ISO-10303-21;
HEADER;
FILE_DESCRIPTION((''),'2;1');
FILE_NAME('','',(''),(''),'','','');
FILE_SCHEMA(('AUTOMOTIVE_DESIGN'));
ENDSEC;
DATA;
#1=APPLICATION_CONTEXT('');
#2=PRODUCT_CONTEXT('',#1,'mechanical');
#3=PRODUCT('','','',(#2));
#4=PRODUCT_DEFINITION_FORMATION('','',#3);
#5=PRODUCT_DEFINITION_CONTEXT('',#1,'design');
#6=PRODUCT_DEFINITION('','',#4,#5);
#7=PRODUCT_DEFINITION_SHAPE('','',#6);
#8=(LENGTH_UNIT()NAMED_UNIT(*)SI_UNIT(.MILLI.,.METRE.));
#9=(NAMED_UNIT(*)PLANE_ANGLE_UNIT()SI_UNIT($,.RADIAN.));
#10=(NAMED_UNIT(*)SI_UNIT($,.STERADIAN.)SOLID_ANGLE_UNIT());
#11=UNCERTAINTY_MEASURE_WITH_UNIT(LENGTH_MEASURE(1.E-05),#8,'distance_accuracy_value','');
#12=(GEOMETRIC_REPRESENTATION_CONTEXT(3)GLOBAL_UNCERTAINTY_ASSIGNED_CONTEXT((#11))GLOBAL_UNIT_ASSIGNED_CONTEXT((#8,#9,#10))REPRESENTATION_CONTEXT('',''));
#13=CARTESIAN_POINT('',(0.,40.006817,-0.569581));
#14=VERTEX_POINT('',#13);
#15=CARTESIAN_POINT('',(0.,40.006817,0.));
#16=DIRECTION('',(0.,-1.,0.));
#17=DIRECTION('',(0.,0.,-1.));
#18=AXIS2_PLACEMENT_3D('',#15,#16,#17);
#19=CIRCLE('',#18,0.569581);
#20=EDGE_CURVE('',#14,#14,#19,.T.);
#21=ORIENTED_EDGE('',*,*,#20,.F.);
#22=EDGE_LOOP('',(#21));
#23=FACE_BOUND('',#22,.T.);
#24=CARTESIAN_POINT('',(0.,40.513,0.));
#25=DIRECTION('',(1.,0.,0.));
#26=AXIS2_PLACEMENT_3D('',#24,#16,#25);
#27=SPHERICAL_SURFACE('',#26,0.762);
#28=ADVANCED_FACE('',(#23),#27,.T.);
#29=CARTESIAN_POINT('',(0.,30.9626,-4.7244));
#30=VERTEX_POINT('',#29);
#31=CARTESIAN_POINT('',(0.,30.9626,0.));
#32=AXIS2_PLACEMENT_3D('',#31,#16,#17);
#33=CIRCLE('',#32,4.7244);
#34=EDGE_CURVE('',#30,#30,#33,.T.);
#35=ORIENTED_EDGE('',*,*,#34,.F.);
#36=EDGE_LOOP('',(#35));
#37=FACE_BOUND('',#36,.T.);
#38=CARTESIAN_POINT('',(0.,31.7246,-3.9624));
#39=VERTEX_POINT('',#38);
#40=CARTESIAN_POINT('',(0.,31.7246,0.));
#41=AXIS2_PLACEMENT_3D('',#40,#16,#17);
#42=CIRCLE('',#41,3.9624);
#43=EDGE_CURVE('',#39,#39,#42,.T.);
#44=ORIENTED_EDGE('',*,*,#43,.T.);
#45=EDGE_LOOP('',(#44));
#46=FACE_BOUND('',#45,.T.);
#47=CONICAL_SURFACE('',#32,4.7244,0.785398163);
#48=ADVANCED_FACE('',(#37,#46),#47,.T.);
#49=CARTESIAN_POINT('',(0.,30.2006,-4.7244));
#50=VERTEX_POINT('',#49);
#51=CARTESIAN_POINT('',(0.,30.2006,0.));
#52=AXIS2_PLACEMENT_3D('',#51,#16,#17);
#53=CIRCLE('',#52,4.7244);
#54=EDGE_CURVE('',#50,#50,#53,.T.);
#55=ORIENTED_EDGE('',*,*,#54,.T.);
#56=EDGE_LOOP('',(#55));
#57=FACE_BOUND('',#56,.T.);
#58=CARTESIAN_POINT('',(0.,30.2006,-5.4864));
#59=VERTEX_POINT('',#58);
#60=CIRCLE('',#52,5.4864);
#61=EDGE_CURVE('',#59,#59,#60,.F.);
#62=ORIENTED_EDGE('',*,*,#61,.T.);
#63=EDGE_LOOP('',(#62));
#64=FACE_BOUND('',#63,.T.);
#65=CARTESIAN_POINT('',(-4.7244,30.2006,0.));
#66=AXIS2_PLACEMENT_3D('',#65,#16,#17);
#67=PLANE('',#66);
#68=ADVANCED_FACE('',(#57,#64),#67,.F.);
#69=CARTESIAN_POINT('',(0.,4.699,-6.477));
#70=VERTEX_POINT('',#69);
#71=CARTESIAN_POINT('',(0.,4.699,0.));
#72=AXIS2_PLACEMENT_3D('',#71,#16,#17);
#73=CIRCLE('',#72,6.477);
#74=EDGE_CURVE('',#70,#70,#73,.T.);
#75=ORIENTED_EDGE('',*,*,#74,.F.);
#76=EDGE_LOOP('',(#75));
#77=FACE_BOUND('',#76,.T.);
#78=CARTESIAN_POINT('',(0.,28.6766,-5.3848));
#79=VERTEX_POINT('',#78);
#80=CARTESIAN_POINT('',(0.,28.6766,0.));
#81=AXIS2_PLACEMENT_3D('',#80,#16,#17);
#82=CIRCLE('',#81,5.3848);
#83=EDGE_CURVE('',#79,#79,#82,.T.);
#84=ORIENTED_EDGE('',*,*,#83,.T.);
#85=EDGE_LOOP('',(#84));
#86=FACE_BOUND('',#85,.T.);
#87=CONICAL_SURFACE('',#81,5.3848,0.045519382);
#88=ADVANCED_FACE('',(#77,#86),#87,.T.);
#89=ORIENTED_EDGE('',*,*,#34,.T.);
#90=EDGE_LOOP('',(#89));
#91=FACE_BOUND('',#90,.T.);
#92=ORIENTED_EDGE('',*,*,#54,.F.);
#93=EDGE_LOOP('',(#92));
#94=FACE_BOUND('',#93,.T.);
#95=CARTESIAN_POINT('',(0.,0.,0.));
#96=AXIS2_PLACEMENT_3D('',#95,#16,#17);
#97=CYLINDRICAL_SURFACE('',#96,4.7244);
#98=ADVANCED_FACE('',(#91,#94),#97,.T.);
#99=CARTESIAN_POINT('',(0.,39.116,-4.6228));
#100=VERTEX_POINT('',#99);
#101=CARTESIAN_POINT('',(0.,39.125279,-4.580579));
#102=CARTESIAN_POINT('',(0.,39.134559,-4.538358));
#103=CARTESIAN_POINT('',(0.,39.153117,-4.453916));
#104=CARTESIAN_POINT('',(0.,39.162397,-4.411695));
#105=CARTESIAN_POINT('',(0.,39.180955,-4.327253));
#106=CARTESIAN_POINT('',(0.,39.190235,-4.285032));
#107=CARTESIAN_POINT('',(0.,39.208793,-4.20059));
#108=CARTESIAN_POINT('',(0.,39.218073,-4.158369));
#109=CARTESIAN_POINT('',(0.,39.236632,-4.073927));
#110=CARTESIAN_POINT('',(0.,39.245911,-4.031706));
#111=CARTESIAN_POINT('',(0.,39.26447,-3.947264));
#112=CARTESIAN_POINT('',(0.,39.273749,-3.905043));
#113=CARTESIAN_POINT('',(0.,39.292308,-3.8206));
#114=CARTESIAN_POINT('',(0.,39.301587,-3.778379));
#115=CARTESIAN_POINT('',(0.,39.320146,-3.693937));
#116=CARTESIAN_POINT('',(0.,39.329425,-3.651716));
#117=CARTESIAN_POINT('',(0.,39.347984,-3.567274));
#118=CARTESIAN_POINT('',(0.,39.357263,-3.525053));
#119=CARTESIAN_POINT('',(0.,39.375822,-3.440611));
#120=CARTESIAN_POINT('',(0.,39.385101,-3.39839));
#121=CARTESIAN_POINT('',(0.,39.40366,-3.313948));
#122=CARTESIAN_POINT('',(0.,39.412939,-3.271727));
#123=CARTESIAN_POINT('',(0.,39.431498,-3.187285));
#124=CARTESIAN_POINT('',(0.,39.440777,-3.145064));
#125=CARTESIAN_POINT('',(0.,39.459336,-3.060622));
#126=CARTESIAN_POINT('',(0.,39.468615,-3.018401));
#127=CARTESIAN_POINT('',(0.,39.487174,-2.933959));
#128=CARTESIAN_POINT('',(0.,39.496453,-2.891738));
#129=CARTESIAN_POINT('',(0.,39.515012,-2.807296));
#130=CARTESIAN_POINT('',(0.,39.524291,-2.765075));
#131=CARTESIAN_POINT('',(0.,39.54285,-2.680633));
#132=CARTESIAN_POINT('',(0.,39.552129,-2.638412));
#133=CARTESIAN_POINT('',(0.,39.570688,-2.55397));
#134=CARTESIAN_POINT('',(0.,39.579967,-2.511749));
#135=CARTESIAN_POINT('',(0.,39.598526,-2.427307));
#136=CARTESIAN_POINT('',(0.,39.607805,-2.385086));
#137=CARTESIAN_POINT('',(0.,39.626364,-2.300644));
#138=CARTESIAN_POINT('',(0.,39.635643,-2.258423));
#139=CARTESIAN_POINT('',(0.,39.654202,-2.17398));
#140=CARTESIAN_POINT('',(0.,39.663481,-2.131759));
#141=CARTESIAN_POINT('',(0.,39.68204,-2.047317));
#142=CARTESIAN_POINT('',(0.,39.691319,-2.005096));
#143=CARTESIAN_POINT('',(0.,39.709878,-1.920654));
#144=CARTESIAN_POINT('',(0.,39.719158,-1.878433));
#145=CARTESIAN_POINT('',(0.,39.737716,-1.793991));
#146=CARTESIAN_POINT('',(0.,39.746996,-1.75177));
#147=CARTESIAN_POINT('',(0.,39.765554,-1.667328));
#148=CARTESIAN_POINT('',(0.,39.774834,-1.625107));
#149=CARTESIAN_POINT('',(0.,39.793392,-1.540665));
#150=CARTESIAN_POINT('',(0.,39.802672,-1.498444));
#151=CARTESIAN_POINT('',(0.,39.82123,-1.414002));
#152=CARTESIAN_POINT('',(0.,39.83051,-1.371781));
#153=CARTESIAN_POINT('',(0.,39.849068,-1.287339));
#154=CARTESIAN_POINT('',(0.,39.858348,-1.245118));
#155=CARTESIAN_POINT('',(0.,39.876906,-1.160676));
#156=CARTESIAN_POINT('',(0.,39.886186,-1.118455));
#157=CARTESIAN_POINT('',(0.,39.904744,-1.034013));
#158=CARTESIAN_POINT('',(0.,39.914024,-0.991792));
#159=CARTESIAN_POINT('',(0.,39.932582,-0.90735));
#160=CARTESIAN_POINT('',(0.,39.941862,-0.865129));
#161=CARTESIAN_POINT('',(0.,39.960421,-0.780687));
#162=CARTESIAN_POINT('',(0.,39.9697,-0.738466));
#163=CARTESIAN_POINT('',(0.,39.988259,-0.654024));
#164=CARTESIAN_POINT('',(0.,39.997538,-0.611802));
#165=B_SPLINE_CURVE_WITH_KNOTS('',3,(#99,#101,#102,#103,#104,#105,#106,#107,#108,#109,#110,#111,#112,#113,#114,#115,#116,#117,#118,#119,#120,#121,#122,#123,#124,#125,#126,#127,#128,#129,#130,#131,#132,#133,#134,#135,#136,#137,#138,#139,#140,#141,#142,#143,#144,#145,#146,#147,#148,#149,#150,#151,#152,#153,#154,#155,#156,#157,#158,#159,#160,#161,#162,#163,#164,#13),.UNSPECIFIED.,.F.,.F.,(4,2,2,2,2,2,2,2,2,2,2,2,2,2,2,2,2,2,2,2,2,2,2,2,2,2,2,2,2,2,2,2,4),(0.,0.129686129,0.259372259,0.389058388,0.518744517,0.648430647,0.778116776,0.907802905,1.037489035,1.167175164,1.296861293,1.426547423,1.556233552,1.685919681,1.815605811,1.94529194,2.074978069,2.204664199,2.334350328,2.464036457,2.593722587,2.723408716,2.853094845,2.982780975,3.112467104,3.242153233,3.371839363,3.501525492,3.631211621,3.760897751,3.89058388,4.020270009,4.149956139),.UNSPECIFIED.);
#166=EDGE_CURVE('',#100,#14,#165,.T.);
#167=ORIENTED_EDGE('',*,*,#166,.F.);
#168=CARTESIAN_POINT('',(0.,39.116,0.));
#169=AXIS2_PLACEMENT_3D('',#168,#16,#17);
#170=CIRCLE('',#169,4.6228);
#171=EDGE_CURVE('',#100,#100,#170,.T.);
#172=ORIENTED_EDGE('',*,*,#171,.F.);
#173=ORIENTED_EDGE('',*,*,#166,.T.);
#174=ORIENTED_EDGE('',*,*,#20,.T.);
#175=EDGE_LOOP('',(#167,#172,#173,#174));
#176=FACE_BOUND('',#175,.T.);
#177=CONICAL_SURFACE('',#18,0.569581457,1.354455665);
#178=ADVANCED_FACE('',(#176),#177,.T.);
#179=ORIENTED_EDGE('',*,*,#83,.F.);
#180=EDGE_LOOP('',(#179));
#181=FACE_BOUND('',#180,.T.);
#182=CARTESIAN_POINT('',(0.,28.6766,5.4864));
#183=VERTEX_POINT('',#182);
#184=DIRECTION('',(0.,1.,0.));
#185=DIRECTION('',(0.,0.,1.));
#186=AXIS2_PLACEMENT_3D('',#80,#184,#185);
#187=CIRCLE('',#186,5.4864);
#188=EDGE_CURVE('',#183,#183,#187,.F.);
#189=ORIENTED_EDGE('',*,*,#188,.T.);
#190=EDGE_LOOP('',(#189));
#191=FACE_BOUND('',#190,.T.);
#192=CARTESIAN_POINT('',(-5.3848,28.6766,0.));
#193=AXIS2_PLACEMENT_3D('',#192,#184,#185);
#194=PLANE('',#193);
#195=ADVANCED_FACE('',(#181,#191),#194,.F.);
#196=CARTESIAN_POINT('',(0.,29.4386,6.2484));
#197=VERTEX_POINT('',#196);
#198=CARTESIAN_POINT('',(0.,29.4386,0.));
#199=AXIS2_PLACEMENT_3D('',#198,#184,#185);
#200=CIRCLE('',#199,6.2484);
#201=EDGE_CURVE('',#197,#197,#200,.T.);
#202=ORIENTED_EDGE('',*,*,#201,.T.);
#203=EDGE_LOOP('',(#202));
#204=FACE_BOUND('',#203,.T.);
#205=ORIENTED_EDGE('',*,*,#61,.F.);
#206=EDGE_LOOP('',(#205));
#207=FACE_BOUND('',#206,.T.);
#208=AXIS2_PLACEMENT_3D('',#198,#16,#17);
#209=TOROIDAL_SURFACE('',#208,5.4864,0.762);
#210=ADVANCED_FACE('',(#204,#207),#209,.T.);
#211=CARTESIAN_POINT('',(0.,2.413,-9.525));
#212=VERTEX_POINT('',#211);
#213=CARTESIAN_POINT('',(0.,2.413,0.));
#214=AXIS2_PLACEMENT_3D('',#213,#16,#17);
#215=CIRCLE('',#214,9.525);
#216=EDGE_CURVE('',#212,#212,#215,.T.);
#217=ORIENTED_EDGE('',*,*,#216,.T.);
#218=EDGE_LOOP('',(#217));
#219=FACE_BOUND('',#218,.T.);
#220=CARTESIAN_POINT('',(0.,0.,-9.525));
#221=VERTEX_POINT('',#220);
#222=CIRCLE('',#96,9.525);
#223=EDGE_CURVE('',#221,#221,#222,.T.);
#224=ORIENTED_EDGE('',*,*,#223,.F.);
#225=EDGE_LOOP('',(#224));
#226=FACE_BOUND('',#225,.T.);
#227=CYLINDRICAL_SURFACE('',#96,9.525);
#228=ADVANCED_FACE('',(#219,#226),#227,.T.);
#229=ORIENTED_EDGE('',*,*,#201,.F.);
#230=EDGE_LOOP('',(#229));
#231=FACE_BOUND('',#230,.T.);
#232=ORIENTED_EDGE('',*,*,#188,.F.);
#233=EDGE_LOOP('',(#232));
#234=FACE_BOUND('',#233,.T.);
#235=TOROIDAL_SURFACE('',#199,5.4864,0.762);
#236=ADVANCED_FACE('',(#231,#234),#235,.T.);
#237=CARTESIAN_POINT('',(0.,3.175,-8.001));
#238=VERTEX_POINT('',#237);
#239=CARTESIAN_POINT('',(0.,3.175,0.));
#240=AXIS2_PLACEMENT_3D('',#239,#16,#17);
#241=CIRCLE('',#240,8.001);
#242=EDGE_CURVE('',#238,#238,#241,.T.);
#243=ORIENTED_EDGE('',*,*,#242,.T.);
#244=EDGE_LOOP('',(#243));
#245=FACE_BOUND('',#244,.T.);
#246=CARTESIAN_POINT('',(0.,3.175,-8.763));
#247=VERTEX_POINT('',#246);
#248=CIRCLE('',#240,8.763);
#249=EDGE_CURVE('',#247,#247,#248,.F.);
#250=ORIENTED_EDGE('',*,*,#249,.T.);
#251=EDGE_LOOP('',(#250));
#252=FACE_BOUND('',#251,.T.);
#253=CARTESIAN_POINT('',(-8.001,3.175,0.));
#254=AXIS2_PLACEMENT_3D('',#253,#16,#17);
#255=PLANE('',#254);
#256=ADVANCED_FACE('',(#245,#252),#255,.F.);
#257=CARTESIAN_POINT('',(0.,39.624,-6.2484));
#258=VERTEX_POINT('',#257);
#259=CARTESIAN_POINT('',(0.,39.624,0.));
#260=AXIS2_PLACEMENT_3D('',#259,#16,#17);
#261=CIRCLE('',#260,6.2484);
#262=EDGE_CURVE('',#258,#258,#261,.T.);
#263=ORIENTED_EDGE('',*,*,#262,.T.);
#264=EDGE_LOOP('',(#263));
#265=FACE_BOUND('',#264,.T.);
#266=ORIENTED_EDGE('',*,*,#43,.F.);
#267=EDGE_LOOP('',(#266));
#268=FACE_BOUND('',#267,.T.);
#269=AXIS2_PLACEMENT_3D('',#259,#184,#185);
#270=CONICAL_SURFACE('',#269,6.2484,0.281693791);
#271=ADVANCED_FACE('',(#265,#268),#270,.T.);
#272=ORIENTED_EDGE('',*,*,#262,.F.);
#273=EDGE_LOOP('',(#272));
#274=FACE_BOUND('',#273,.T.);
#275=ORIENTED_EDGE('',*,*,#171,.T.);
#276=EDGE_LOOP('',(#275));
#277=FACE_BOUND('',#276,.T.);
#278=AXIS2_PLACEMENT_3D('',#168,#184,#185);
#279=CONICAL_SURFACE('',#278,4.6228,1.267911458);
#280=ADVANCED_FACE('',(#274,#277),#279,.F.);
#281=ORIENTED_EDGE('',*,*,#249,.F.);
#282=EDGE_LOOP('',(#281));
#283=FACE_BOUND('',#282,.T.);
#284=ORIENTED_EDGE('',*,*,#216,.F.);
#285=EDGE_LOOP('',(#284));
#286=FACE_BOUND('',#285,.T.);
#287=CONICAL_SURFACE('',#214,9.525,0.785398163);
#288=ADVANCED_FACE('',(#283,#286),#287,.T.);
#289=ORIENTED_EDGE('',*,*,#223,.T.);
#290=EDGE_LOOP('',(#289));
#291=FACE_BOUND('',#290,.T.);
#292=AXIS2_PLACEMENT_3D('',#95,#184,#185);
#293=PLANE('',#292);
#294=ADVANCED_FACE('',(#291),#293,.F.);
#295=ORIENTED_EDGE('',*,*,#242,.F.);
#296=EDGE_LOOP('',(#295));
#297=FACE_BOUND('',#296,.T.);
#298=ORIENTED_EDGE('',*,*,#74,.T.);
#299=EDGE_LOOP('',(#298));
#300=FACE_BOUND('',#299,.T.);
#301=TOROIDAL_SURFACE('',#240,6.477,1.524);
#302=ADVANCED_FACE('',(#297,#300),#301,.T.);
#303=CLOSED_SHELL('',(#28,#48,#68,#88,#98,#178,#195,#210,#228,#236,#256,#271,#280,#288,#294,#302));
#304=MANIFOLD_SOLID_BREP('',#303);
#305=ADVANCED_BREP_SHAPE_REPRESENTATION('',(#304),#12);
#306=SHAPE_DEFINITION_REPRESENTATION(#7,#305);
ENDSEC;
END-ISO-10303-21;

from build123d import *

# Parameters (mm, degrees)
CHAMFER1_SIZE = 0.762
FILLET1_R     = 1.524
FILLET2_R     = 0.762


with BuildPart() as part:
    # Sketch1 → Revolve1 (revolve)
    with BuildSketch(Plane.XY, mode=Mode.PRIVATE) as revolve1_sk:
        with BuildLine():
            Line((0, 0), (-9.525, 0))
            Line((-9.525, 0), (-9.525, 3.175))
            Line((-9.525, 3.175), (-8.001, 3.175))
            Line((-8.001, 3.175), (-8.001, 4.699))
            Line((-8.001, 4.699), (-6.477, 4.699))
            Line((-6.477, 4.699), (-5.3848, 28.6766))
            Line((-5.3848, 28.6766), (-6.2484, 28.6766))
            Line((-6.2484, 28.6766), (-6.2484, 30.2006))
            Line((-6.2484, 30.2006), (-4.7244, 30.2006))
            Line((-4.7244, 30.2006), (-4.7244, 31.7246))
            Line((-4.7244, 31.7246), (-3.9624, 31.7246))
            Line((-3.9624, 31.7246), (-6.2484, 39.624))
            Line((-6.2484, 39.624), (-4.6228, 39.116))
            Line((-4.6228, 39.116), (-0.569581457, 40.006817262))
            ThreePointArc((-0.569581457, 40.006817262), (-0.695109792, 40.825196055), (0, 41.275))
            Line((0, 41.275), (0, 0))
        make_face()
    revolve(revolve1_sk.sketch.rotate(Axis((0, 0, 0), (0, 1, 0)), 270), axis=Axis((0, 0, 0), (0, 1, 0)))

    # Chamfer1
    chamfer1_edges = [part.edges().sort_by_distance(p)[0] for p in [
        (0, 3.175, 9.525),
        (0, 31.7246, 4.7244),
    ]]
    chamfer(chamfer1_edges, length=CHAMFER1_SIZE - 0.0001)  # a hair under: the kernel refuses the full size

    # Fillet1
    fillet1_edges = [part.edges().sort_by_distance(p)[0] for p in [
        (0, 4.699, 8.001),
    ]]
    fillet(fillet1_edges, radius=FILLET1_R - 0.0001)  # a hair under: the kernel refuses the full size

    # Fillet2
    fillet2_edges = [part.edges().sort_by_distance(p)[0] for p in [
        (0, 28.6766, 6.2484),
        (0, 30.2006, 6.2484),
    ]]
    fillet(fillet2_edges, radius=FILLET2_R - 0.0001)  # a hair under: the kernel refuses the full size


solid = part.part
